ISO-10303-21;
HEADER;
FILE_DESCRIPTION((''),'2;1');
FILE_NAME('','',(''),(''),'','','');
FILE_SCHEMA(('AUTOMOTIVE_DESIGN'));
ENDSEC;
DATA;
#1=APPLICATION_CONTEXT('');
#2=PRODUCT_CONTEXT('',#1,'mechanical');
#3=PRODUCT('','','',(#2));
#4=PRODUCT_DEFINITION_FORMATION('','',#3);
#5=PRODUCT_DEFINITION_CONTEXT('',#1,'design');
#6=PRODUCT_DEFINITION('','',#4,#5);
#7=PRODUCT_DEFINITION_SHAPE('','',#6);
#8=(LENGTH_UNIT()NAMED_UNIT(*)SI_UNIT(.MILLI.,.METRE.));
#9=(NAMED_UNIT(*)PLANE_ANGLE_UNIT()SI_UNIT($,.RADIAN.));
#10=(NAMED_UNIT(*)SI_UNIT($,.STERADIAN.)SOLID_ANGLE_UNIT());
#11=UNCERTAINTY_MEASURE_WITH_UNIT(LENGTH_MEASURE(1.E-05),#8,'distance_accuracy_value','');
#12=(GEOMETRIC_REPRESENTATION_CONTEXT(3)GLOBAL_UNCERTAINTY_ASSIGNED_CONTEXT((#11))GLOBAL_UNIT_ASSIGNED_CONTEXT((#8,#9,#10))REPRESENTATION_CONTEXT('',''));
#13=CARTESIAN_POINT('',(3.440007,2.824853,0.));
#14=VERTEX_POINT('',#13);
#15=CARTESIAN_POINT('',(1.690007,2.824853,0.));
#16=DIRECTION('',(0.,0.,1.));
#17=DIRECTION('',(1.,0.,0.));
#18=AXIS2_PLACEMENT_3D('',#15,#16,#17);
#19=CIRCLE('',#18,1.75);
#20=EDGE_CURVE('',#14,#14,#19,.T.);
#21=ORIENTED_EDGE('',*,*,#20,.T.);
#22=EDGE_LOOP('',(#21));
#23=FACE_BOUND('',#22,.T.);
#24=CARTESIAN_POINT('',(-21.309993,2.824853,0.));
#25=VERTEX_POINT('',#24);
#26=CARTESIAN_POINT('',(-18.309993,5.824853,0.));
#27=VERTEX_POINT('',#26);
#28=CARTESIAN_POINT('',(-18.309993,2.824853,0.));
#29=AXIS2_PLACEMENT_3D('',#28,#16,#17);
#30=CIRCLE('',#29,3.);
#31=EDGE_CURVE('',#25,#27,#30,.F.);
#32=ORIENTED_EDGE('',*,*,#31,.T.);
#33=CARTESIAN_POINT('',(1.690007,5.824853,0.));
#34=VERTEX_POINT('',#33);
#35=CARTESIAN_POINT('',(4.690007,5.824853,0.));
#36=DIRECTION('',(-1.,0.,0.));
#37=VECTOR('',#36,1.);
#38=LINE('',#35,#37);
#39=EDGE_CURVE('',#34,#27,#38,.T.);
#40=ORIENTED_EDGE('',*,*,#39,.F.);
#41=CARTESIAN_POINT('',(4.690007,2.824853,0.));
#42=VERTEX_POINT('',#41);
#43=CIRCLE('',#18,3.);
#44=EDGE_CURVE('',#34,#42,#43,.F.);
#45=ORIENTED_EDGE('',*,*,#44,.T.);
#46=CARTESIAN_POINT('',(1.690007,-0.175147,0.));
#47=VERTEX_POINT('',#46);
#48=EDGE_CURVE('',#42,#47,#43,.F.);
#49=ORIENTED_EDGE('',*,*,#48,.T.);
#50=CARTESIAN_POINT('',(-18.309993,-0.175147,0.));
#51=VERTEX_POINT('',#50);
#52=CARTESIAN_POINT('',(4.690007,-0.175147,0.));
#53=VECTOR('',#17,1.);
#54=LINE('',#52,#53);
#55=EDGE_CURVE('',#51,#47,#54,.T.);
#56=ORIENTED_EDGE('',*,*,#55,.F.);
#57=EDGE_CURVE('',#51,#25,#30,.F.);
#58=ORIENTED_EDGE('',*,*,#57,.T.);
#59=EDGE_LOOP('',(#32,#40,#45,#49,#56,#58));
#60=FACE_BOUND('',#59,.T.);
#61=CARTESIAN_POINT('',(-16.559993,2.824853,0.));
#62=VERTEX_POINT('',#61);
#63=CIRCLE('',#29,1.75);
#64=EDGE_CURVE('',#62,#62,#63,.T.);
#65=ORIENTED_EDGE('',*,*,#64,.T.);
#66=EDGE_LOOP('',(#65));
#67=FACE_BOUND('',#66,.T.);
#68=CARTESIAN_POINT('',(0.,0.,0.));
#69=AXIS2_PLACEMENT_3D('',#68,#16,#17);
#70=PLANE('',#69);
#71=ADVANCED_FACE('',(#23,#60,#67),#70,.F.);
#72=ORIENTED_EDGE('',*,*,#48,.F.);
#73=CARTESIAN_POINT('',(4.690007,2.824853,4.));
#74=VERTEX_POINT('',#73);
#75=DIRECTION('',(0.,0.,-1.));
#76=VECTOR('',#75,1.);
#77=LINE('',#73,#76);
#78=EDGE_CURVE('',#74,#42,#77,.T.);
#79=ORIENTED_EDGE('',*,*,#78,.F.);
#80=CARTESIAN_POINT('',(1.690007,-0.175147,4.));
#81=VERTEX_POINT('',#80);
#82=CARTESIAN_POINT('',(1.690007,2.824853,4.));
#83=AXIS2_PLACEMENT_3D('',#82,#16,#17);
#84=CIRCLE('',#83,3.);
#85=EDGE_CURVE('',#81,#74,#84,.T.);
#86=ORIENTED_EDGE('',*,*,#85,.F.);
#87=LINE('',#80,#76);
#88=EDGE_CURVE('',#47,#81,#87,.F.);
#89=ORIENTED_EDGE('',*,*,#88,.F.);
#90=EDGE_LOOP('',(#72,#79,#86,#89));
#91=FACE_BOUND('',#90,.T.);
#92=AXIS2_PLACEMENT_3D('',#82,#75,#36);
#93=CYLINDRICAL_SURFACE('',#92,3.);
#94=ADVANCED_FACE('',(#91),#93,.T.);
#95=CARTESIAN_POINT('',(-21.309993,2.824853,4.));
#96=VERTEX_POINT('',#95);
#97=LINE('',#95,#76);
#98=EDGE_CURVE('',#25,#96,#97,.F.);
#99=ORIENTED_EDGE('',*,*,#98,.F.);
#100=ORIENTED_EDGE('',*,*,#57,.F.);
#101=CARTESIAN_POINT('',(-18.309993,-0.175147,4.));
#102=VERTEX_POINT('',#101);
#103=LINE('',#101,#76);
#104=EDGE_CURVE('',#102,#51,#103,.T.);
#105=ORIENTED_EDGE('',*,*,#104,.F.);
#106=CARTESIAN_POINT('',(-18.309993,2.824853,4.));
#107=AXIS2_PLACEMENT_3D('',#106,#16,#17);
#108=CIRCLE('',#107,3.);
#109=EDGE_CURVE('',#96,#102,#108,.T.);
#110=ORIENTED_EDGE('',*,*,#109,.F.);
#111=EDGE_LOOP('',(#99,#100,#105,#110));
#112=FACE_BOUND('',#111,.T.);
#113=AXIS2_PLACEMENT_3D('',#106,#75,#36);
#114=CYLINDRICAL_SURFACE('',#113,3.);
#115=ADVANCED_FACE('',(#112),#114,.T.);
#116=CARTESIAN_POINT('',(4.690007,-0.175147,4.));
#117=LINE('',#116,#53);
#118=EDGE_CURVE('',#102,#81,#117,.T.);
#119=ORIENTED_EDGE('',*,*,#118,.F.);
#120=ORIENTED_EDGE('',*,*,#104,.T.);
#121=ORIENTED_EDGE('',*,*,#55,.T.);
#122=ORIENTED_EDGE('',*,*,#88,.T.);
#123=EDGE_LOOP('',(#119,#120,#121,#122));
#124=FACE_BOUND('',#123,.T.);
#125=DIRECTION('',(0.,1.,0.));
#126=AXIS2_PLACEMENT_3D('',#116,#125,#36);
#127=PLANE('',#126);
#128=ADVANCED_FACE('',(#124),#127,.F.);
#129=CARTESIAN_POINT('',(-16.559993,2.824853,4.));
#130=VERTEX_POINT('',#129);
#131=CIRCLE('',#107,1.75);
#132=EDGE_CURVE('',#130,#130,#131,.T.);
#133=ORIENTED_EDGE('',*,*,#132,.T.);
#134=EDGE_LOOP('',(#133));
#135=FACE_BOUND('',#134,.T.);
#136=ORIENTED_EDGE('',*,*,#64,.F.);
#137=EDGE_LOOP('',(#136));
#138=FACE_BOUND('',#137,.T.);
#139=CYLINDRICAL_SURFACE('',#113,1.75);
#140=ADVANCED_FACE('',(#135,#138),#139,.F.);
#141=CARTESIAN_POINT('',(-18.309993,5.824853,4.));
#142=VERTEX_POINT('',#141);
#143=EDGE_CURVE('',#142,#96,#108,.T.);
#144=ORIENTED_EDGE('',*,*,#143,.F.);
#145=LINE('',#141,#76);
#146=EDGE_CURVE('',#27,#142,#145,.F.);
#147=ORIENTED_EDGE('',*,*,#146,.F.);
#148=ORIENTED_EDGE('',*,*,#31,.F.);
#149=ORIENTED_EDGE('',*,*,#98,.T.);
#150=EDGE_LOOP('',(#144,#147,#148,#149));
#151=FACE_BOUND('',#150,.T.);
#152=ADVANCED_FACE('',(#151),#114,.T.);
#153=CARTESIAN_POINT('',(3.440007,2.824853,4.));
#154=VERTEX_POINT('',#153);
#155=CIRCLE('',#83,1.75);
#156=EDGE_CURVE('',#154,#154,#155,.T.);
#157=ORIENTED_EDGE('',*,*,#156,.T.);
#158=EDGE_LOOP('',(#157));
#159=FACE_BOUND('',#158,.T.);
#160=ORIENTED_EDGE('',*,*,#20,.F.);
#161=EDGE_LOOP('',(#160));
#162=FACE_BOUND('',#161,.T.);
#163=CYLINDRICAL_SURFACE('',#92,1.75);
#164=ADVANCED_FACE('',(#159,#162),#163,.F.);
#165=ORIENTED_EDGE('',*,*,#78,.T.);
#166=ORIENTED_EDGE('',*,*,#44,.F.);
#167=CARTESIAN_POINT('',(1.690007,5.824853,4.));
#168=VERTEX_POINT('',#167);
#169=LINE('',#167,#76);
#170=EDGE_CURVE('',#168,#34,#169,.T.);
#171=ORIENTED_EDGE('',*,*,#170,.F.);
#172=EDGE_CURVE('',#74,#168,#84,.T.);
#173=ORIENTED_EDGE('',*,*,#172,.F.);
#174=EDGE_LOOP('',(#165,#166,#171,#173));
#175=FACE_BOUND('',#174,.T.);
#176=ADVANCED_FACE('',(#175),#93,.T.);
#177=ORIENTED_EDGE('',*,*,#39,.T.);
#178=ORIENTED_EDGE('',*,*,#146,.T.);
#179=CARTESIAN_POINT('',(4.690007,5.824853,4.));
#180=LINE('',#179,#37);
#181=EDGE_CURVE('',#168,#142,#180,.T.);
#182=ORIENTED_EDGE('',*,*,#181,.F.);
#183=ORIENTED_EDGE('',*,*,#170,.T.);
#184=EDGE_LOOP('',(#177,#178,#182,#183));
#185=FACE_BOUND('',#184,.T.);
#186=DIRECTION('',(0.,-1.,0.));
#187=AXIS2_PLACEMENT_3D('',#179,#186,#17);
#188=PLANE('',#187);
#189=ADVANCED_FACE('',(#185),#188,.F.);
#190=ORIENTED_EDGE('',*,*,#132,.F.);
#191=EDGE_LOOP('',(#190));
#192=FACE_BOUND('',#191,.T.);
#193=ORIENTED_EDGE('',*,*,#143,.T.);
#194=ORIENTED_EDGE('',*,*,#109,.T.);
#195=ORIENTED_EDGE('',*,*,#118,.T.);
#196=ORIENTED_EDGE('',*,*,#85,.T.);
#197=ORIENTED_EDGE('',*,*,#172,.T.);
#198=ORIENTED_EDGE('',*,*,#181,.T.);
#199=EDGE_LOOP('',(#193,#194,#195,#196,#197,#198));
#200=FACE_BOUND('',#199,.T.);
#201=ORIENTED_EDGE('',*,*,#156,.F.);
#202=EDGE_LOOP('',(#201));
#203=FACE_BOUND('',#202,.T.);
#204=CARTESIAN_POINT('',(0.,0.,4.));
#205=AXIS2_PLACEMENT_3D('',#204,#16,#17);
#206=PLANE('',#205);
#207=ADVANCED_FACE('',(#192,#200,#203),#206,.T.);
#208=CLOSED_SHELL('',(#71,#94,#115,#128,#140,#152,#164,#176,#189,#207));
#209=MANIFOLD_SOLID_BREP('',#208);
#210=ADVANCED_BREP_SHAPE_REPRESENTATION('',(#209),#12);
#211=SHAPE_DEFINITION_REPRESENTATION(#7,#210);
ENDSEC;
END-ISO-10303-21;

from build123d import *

# Parameters (mm, degrees)
CROQUIS1_W              = 26
CROQUIS1_H              = 6
CROQUIS1_R              = 1.75
SALIENTE_EXTRUIR1_DEPTH = 4
REDONDEO2_R             = 3


with BuildPart() as part:
    # Croquis1 → Saliente-Extruir1 (new body)
    with BuildSketch(Plane.XY):
        with Locations((-8.309993141, 2.824852585)):
            Rectangle(CROQUIS1_W, CROQUIS1_H)
        with Locations((1.690006859, 2.824852585)):
            Circle(CROQUIS1_R, mode=Mode.SUBTRACT)
        with Locations((-18.309993141, 2.824852585)):
            Circle(CROQUIS1_R, mode=Mode.SUBTRACT)
    extrude(amount=SALIENTE_EXTRUIR1_DEPTH)

    # Redondeo2
    redondeo2_edges = [part.edges().sort_by_distance(p)[0] for p in [
        (4.690006859, 5.824852585, 2),
        (4.690006859, -0.175147415, 2),
        (-21.309993141, 5.824852585, 2),
        (-21.309993141, -0.175147415, 2),
    ]]
    fillet(redondeo2_edges, radius=REDONDEO2_R - 0.0001)  # a hair under: the kernel refuses the full size


solid = part.part
